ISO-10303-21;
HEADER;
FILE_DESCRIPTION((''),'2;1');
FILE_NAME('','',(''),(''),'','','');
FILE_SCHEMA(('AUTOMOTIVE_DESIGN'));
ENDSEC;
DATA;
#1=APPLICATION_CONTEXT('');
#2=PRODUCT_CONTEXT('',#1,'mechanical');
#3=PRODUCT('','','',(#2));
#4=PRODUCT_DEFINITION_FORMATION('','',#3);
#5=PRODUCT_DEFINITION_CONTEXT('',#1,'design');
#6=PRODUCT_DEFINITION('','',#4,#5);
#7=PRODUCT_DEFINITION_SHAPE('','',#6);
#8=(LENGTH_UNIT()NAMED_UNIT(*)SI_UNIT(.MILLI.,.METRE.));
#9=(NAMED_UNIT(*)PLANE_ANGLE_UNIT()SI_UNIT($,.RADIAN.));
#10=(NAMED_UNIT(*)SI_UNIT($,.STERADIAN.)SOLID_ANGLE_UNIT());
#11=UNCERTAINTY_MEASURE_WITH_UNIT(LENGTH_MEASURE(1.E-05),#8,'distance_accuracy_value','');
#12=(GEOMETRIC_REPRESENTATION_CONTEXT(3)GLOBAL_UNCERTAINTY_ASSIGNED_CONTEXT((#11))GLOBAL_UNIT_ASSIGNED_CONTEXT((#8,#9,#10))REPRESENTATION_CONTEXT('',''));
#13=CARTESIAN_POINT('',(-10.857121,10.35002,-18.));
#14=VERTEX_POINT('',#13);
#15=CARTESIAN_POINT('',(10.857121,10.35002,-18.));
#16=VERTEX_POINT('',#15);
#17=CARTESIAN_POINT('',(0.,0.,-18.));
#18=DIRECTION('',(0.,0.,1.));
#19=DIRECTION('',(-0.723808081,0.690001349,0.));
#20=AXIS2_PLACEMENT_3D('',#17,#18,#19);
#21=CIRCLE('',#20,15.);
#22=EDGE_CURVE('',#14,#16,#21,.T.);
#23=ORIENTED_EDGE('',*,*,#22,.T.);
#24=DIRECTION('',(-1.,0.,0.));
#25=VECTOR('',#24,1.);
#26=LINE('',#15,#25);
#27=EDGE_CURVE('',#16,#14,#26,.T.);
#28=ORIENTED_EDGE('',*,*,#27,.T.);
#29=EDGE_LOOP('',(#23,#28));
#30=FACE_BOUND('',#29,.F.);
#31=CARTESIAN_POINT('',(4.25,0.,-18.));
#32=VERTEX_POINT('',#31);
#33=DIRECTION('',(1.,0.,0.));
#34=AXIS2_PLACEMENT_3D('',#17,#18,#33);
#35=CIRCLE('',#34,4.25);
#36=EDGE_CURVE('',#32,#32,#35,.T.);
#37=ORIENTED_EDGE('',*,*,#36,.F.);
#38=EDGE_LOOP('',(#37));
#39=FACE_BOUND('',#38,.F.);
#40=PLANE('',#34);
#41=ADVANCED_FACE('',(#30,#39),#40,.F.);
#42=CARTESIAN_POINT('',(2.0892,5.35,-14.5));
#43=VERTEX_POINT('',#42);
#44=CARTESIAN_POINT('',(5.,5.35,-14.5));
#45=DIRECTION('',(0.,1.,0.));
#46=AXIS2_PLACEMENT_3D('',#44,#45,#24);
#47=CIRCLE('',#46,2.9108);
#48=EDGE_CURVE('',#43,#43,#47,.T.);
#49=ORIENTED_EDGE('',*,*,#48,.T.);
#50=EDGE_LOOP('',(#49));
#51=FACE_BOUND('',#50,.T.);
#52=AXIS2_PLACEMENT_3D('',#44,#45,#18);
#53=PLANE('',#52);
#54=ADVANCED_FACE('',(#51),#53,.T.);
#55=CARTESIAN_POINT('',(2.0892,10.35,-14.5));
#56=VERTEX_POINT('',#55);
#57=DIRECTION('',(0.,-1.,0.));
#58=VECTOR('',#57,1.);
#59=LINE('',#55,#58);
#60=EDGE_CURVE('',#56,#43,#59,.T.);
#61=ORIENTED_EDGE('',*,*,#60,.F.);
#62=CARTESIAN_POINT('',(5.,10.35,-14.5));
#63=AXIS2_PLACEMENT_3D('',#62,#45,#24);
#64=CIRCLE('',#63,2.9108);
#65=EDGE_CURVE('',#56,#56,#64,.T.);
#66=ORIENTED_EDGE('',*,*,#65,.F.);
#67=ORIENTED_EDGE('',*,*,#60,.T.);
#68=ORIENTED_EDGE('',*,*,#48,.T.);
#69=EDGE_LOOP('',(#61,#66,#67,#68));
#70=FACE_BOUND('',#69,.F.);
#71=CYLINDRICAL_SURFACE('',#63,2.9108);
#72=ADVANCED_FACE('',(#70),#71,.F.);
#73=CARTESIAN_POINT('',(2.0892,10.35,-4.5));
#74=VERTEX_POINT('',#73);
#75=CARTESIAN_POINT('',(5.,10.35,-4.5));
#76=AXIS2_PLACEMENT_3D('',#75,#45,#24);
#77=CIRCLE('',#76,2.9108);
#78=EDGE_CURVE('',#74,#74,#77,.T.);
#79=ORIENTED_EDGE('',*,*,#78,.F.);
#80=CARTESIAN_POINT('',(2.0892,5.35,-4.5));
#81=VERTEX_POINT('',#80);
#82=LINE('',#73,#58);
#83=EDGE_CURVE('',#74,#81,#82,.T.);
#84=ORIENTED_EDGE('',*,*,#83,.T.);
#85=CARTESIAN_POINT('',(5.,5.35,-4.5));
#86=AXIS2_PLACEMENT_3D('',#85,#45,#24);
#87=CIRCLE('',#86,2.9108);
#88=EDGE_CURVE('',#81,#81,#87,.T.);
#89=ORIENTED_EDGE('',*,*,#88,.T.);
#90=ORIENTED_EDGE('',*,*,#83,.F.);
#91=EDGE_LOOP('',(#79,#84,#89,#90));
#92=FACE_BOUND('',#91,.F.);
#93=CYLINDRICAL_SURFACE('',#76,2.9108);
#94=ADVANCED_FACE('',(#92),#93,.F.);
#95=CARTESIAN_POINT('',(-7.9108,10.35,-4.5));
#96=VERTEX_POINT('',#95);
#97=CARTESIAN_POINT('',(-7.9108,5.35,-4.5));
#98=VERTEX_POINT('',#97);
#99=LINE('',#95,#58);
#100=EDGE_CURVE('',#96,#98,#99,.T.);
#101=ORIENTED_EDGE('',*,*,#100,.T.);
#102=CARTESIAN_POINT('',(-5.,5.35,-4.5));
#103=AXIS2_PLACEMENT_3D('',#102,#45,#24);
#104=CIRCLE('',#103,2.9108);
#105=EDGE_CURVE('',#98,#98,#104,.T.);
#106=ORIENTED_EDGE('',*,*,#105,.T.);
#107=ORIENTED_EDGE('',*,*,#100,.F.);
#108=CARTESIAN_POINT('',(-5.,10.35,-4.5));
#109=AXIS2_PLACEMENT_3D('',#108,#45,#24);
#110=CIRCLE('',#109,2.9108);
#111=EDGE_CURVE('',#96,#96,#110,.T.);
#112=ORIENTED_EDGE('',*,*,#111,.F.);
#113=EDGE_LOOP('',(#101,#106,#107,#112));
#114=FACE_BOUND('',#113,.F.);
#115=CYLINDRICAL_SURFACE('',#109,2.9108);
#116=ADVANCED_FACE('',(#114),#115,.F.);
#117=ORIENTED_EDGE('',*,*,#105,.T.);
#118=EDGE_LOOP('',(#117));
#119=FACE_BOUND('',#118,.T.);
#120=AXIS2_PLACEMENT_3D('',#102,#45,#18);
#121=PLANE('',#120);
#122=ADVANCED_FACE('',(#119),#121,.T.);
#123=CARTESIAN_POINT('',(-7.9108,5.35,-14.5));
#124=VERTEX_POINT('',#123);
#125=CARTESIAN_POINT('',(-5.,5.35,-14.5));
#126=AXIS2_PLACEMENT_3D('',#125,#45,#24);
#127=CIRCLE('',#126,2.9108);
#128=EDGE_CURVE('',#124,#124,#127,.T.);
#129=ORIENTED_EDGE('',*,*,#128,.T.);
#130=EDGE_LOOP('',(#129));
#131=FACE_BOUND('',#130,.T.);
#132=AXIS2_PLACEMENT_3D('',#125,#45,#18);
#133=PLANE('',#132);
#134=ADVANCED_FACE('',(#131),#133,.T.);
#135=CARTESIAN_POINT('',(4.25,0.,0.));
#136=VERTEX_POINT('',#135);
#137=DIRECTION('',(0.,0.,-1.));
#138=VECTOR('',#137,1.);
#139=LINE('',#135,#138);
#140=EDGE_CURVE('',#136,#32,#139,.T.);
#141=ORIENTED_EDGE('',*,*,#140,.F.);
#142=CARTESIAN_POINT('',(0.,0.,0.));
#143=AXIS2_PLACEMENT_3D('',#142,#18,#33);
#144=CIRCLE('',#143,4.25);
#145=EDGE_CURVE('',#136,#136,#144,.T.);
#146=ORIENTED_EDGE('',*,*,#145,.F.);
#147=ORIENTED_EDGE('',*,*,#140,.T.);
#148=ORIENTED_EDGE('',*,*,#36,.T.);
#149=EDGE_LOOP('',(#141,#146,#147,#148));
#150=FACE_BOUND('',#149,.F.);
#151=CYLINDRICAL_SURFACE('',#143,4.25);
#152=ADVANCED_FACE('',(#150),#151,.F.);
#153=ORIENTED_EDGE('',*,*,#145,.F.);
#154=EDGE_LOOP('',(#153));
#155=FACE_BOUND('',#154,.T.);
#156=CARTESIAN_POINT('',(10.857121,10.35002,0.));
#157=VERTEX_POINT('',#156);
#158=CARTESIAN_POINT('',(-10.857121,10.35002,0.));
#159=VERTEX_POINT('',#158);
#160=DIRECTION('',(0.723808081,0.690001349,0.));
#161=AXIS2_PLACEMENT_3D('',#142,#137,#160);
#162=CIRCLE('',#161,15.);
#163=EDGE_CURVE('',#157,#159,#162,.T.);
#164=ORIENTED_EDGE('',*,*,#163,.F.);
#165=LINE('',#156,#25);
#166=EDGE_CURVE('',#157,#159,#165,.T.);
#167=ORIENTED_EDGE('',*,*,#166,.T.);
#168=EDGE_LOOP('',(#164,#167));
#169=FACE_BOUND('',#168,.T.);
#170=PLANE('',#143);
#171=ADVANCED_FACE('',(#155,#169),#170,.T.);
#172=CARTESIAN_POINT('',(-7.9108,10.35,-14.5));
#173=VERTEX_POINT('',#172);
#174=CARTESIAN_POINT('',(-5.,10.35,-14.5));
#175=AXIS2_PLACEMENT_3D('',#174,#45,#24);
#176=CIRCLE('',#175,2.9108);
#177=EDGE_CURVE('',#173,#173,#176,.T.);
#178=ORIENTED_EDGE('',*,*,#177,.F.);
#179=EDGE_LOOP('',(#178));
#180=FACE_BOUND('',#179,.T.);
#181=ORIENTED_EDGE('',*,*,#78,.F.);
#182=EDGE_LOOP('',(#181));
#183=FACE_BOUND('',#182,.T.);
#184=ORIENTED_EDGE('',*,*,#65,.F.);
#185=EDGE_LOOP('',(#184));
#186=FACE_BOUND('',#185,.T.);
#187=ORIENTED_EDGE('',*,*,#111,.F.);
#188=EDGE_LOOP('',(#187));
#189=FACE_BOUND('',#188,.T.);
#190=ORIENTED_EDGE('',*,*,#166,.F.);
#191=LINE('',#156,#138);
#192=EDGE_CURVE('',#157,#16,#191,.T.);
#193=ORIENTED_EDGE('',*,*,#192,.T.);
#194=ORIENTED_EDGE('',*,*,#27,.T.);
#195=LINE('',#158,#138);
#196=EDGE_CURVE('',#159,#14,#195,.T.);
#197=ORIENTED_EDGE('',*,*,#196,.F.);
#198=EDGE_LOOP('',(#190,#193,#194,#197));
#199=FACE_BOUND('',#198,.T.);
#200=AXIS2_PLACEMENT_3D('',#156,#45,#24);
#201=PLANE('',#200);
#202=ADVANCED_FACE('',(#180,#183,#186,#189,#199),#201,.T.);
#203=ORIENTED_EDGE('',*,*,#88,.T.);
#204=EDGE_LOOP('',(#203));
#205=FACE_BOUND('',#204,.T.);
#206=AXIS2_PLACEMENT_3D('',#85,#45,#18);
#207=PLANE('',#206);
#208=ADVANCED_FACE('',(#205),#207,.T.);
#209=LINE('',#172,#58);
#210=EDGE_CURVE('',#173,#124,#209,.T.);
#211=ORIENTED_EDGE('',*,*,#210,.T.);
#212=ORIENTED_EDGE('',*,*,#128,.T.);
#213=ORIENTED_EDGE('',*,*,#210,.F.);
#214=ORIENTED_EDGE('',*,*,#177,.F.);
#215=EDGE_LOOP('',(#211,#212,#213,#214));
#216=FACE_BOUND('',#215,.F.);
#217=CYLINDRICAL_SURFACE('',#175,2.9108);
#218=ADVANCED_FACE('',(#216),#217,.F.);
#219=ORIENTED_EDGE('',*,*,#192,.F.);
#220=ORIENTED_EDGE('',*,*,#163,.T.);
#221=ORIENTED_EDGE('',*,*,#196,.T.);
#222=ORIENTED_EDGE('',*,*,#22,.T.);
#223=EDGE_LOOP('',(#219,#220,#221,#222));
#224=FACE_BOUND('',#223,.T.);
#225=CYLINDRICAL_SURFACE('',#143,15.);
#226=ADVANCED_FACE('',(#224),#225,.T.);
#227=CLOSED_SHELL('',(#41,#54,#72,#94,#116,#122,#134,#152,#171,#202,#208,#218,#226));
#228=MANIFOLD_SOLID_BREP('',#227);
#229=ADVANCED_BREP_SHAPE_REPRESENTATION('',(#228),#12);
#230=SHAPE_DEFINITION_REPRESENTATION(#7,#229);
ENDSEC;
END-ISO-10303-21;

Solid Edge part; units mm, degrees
sketch "Sketch1" plane through (0, 0, 0) normal (0, 0, 1) x (1, 0, 0)
  circle A0 centre (0, 0) radius 15
  circle A1 centre (0, 0) radius 4.25
  dimension "D1" = 30
  dimension "D2" = 8.5
extrude "ExtrudedProtrusion_1" add sketch "Sketch1" against normal blind 18
sketch "Sketch2" plane through (0, 0, 0) normal (0, 0, 1) x (0, 1, 0)
  line L0 (10.35, -10.8571) -> (10.35, 10.8571)
  arc A0 (10.35, 10.8571) -> (10.35, -10.8571) centre (0, 0) cw
extrude "ExtrudedCutout_1" cut sketch "Sketch2" against normal blind 18
sketch "Sketch3" plane through (0, 10.35, -9) normal (0, 1, 0) x (-1, 0, 0)
  circle A0 centre (-5, 4.5) radius 2.9108
  circle A1 centre (5, 4.5) radius 2.9108
  circle A2 centre (-5, -5.5) radius 2.9108
  circle A3 centre (5, -5.5) radius 2.9108
  dimension "D1" = 10
  dimension "D2" = 10
  dimension "D3" = 5
  dimension "D4" = 4.5
extrude "ExtrudedCutout_2" cut sketch "Sketch3" against normal blind 5
properties material "ABS"
